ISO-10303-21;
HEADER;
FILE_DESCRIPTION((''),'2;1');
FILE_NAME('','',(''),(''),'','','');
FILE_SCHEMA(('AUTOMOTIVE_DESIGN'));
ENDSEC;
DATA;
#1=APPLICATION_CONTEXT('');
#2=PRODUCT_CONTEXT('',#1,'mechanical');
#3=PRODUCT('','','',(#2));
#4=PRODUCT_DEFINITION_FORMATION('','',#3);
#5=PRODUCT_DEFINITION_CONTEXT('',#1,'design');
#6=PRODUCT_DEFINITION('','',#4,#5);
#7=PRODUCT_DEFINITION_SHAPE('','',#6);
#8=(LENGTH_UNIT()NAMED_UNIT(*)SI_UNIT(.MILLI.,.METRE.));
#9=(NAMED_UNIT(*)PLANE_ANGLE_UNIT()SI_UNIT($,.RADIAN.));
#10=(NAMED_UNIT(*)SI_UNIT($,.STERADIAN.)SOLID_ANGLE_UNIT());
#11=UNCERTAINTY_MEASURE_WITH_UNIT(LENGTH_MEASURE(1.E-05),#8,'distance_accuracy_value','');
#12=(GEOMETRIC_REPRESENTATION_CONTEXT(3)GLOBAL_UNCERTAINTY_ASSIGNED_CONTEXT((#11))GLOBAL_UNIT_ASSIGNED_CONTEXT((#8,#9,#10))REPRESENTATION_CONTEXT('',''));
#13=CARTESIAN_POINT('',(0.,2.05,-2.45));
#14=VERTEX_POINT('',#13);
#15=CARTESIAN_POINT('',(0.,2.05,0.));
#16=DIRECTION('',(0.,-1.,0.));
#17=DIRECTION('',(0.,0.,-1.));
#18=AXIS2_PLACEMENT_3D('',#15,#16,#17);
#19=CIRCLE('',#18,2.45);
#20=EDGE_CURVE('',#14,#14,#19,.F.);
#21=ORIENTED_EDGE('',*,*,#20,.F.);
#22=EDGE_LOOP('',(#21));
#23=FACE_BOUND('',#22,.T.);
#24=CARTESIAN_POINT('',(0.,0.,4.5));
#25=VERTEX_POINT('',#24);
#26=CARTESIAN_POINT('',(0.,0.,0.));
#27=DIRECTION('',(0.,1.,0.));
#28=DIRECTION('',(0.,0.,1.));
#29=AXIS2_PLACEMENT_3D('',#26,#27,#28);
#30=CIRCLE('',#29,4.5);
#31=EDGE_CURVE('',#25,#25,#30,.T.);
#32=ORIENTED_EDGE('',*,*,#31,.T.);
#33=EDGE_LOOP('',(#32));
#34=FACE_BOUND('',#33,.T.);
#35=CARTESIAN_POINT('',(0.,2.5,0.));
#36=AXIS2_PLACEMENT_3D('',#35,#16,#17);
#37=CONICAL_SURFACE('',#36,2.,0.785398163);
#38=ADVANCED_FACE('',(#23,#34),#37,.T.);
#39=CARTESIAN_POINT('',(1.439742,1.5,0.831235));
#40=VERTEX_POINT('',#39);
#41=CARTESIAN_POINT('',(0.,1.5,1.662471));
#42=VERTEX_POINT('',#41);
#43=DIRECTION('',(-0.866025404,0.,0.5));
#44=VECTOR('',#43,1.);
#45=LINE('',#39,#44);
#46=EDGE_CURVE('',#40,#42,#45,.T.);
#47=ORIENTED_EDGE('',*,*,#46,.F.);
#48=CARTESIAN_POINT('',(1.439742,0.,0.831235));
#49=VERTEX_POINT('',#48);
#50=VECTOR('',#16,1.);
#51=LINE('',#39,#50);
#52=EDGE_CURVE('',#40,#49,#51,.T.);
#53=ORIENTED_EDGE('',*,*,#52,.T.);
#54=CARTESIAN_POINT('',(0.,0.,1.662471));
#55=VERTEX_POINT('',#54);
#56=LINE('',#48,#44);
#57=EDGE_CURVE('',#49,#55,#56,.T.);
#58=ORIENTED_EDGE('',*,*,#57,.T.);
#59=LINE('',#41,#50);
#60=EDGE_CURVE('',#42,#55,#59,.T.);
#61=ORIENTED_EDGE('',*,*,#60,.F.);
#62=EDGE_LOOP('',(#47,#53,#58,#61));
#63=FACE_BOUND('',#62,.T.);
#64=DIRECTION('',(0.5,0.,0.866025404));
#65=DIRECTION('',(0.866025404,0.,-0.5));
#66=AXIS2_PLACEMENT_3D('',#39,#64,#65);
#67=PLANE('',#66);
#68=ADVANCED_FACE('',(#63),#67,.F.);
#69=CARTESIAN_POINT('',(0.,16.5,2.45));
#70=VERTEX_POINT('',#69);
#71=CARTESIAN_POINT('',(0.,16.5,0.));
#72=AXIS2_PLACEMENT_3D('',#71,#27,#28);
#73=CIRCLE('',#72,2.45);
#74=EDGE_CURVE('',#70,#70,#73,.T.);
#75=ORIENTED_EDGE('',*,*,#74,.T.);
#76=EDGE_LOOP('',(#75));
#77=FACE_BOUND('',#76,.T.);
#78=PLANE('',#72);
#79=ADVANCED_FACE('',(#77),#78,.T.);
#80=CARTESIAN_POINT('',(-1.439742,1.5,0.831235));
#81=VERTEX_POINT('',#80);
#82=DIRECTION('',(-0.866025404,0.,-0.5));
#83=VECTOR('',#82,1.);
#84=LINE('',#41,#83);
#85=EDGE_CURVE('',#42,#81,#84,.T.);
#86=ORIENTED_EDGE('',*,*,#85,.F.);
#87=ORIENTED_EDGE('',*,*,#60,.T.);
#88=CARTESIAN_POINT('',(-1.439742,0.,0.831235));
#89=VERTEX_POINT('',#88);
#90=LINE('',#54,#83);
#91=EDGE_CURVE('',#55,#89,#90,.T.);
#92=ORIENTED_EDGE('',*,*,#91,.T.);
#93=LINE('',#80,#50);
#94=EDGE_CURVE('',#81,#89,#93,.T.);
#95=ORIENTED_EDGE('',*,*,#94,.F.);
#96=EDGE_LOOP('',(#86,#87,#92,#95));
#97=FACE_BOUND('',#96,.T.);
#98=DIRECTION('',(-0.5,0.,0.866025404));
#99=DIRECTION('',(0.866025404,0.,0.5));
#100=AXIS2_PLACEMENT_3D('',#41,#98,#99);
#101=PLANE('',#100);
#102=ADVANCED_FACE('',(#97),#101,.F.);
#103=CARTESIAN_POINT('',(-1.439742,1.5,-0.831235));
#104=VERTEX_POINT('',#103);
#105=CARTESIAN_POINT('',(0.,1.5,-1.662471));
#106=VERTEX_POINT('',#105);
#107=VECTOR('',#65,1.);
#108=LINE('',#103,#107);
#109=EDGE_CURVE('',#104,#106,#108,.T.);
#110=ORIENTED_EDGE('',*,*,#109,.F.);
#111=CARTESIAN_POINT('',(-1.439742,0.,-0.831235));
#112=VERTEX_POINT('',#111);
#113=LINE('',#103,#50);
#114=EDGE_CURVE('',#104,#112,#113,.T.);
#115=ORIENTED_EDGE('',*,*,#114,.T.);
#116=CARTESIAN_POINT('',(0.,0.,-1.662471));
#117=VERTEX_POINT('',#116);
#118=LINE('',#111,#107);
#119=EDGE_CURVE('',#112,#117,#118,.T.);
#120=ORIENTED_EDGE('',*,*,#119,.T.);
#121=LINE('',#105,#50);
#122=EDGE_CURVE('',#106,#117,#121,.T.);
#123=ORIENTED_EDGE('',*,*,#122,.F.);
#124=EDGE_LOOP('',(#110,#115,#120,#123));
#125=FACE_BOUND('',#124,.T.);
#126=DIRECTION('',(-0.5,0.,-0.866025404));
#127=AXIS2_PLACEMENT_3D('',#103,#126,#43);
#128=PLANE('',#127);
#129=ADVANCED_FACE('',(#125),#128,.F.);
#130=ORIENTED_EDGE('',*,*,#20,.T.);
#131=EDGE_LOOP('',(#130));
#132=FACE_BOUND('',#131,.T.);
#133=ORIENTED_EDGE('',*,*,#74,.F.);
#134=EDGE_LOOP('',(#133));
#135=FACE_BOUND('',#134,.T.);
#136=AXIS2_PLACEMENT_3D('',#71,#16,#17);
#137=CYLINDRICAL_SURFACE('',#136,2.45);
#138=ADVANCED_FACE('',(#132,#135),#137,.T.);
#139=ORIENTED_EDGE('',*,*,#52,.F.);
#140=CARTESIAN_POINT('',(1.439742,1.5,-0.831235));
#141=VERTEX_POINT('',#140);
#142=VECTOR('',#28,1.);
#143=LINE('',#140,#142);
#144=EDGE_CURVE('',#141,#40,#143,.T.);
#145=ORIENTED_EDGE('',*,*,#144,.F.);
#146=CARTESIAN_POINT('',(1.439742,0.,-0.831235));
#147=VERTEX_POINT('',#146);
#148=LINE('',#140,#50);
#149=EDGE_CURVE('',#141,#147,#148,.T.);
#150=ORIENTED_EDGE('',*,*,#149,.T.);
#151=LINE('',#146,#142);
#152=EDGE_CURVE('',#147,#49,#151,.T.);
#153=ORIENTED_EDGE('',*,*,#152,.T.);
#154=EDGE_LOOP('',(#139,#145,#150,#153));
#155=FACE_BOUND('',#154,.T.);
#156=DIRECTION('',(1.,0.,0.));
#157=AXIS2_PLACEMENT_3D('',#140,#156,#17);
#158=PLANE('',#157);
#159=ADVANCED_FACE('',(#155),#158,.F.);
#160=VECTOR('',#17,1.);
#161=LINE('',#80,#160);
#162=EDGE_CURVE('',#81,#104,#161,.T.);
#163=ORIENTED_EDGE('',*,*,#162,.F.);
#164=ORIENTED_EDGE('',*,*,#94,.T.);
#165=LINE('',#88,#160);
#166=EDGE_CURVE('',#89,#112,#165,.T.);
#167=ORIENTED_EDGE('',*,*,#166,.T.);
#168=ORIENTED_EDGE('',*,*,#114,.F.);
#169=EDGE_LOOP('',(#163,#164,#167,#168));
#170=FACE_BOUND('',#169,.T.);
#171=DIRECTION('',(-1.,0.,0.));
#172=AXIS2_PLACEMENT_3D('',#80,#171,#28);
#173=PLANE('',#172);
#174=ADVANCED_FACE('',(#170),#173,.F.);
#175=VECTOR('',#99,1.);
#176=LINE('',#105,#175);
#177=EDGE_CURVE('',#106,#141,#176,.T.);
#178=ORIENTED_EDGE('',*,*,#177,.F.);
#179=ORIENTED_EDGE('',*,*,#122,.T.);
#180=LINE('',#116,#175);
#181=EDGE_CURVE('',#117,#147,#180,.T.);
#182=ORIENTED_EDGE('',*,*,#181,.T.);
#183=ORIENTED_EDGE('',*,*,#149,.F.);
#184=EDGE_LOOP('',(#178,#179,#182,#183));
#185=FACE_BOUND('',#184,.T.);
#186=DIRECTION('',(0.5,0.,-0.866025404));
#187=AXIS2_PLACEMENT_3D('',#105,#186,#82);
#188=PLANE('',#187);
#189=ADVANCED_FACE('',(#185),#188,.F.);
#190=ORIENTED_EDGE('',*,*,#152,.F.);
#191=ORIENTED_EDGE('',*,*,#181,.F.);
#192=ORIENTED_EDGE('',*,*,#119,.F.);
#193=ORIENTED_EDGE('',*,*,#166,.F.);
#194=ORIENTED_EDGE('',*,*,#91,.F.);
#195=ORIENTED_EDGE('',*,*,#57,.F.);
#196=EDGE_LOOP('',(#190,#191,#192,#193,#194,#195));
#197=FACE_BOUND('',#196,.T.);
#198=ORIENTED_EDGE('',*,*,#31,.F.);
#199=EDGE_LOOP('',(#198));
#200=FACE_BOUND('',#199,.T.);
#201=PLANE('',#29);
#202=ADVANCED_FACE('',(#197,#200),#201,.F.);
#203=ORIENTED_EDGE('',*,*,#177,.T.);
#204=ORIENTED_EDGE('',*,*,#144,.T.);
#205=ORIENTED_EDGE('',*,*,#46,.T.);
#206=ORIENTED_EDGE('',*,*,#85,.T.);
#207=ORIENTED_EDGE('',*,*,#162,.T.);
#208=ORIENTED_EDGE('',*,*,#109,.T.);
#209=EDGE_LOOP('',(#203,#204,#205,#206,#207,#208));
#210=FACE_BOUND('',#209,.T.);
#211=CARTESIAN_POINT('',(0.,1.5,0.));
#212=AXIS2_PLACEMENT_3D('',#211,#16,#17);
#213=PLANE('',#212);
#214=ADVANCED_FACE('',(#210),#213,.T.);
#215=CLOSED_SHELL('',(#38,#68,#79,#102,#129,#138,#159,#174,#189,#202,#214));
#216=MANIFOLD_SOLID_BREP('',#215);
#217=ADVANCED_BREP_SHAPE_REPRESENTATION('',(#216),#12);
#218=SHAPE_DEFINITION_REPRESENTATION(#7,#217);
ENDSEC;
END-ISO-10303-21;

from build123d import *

# Parameters (mm, degrees)
SKETCH1_R           = 4.5
BOSS_EXTRUDE1_DEPTH = 2.5
SKETCH2_R           = 2.45
BOSS_EXTRUDE2_DEPTH = 14
CHAMFER1_SIZE       = 2.5
CUT_EXTRUDE1_DEPTH  = 1.5


with BuildPart() as part:
    # Sketch1 → Boss-Extrude1 (new body)
    with BuildSketch(Plane(origin=(0, 0, 0), x_dir=(1, 0, 0), z_dir=(0, 1, 0))):
        with Locations(Location((0, 0, 0), (0, 0, 270))):
            Circle(SKETCH1_R)
    extrude(amount=BOSS_EXTRUDE1_DEPTH)

    # Sketch2 → Boss-Extrude2 (add)
    with BuildSketch(Plane(origin=(0, 2.5, 0), x_dir=(1, 0, 0), z_dir=(0, 1, 0))):
        with Locations(Location((0, 0, 0), (0, 0, 270))):
            Circle(SKETCH2_R)
    extrude(amount=BOSS_EXTRUDE2_DEPTH)

    # Chamfer1
    # the kernel refuses this chamfer: 2.5 mm, written as the material it takes off along each edge
    with BuildSketch(Plane(origin=(0, 2.5, 0), x_dir=(0, 0, 1), z_dir=(-1, 0, 0))) as chamfer1_piece_1_section:
        Polygon((4.5, -CHAMFER1_SIZE), (4.5 - CHAMFER1_SIZE, 0), (4.5, 0), align=None)
    chamfer1_piece_1 = revolve(axis=Axis((0, 2.5, 0), (0, 1, 0)), mode=Mode.PRIVATE)
    chamfer1_piece_1 = chamfer1_piece_1 - Plane(origin=(0, 1.019761833, 0), x_dir=(0, 0, 1), z_dir=(0, -1, 0)) * Cylinder(2.45, 18, mode=Mode.PRIVATE)
    add(chamfer1_piece_1, mode=Mode.SUBTRACT)

    # Sketch3 → Cut-Extrude1 (cut)
    with BuildSketch(Plane.XZ):
        Polygon((0, -1.662470902), (1.439742034, -0.831235451), (1.439742034, 0.831235451), (0, 1.662470902), (-1.439742034, 0.831235451), (-1.439742034, -0.831235451), align=None)
    extrude(amount=-CUT_EXTRUDE1_DEPTH, mode=Mode.SUBTRACT)


solid = part.part
